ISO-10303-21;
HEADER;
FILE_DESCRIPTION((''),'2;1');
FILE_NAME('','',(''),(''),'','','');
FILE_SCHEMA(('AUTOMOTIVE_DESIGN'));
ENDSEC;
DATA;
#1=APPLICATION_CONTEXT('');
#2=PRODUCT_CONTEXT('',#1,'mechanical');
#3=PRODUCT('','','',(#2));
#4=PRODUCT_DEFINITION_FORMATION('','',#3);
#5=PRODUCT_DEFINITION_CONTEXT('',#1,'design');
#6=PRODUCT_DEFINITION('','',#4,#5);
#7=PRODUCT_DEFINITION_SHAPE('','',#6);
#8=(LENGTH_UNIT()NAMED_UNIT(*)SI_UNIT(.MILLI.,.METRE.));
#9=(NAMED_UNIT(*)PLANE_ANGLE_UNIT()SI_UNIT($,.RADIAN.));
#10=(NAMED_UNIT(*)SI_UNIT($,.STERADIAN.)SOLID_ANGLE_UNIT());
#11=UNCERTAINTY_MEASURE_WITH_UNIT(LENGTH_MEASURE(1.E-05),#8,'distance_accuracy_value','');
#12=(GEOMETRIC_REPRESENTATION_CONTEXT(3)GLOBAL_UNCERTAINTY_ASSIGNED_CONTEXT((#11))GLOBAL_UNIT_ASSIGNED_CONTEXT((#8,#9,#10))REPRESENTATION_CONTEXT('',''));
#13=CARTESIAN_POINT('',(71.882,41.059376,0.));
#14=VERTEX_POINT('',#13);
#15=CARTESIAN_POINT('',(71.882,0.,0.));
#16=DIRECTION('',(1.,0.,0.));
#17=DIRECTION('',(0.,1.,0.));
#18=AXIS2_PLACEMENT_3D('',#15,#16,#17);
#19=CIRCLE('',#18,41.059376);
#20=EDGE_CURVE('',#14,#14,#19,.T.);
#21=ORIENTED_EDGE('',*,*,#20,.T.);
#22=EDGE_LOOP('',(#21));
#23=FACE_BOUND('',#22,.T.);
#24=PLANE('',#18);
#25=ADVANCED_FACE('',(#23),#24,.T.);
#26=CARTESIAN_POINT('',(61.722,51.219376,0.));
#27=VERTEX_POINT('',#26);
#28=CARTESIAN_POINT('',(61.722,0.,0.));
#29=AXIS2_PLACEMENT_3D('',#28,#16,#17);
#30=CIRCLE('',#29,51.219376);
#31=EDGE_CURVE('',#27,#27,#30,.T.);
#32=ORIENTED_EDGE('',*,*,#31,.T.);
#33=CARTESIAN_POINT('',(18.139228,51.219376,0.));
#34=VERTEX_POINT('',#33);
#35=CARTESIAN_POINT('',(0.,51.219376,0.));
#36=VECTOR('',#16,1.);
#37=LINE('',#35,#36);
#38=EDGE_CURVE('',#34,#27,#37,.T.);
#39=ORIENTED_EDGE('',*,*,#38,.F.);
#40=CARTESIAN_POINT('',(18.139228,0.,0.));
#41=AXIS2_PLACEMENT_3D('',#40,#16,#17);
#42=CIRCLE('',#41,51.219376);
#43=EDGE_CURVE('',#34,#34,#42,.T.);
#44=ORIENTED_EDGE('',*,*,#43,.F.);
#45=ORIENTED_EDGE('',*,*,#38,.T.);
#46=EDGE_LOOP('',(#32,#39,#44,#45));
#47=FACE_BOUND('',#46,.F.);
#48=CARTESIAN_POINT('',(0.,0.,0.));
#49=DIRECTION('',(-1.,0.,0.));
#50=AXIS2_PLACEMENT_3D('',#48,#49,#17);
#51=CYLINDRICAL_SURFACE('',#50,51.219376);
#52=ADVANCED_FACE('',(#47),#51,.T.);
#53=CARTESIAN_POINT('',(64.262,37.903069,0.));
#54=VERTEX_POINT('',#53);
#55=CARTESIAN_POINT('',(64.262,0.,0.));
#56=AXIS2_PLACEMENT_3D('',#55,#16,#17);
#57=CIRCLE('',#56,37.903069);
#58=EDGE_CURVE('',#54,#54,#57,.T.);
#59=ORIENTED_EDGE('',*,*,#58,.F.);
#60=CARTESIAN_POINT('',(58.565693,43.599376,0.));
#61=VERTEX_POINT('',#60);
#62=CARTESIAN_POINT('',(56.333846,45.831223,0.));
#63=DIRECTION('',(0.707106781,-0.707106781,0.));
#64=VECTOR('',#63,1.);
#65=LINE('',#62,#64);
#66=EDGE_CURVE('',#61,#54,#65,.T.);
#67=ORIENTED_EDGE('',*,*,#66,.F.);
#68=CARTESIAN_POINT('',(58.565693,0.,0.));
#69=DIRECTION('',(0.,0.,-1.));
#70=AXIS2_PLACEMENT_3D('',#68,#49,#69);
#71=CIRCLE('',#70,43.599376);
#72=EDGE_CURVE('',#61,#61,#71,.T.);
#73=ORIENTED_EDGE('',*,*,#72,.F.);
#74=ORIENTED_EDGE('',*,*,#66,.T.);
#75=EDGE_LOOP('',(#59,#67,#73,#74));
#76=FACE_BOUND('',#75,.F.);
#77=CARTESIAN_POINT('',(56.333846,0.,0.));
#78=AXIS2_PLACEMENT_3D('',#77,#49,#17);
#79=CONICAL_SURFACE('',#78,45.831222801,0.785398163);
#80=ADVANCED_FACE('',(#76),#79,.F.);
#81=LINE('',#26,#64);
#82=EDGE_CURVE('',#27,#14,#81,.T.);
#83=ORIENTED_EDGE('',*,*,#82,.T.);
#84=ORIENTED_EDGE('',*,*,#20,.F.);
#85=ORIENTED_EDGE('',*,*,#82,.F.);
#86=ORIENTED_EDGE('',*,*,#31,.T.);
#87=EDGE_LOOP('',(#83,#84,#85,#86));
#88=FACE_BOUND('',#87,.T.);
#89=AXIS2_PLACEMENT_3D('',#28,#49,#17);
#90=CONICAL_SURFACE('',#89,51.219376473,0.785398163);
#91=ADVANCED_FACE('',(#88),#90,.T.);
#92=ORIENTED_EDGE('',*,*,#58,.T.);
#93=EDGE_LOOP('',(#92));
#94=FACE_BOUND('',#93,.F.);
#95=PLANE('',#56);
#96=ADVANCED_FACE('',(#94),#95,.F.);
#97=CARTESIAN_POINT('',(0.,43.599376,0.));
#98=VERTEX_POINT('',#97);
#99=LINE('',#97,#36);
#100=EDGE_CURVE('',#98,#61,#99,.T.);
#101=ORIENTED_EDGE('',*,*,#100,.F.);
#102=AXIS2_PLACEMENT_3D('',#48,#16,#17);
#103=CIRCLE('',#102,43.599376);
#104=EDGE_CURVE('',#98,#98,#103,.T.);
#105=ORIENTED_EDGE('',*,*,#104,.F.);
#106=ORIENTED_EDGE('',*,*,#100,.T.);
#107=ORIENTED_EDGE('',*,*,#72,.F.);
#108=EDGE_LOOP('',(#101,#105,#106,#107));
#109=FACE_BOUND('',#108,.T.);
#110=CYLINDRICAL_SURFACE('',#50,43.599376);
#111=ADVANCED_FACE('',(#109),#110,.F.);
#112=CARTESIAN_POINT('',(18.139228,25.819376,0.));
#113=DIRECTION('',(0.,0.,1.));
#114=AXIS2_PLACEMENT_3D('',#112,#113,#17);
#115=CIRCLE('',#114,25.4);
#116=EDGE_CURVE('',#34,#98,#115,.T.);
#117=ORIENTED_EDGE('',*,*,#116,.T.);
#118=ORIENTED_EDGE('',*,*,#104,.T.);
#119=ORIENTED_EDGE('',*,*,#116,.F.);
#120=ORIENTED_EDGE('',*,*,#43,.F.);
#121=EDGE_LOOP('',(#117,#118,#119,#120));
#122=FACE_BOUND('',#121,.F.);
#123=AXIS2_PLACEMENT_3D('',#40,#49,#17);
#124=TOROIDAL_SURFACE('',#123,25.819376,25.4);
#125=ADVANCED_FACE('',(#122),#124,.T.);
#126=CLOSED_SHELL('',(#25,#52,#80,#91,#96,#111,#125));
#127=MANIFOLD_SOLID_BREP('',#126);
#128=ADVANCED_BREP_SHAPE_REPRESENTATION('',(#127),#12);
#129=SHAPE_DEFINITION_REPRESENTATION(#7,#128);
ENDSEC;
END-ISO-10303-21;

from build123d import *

# Parameters (mm, degrees)
F0_R     = 51.2193764732
F1_DEPTH = 71.882
F2_SIZE  = 10.16
F3_T     = -7.62


# Not quite as in the source:
# - a fillet or chamfer that OpenCascade refuses, or shapes differently, is made with other operations: its cross-section is extruded or revolved along the edge and cut away or added


with BuildPart() as f1:
    # F0 (on Right) → F1 (new body)
    with BuildSketch(Plane.YZ):
        Circle(F0_R)
    extrude(amount=F1_DEPTH)

    # F2
    f2_edges = [f1.edges().sort_by_distance(p)[0] for p in [
        (71.882, -51.219376, 0),
    ]]
    chamfer(f2_edges, length=F2_SIZE)

    # F3
    f3_openings = [f1.faces().sort_by_distance(p)[0] for p in [
        (0, 0, 0),
    ]]
    offset(amount=F3_T, openings=f3_openings)

    # F4: fillet of radius 25.4 on 1 edges, made by hand

    # F4_s1 → F4_t2 (revolve, cut)
    with BuildSketch(Plane.XY):
        with BuildLine():
            ThreePointArc((18.1392282085, 51.2193764732), (8.3018505091, 49.2370193947), (0, 43.5993764732))
            Line((0, 43.5993764732), (0, 51.2193764732))
            Line((0, 51.2193764732), (18.1392282085, 51.2193764732))
        make_face()
    revolve(axis=Axis((0, 0, 0), (1, 0, 0)), mode=Mode.SUBTRACT)


solid = f1.part
